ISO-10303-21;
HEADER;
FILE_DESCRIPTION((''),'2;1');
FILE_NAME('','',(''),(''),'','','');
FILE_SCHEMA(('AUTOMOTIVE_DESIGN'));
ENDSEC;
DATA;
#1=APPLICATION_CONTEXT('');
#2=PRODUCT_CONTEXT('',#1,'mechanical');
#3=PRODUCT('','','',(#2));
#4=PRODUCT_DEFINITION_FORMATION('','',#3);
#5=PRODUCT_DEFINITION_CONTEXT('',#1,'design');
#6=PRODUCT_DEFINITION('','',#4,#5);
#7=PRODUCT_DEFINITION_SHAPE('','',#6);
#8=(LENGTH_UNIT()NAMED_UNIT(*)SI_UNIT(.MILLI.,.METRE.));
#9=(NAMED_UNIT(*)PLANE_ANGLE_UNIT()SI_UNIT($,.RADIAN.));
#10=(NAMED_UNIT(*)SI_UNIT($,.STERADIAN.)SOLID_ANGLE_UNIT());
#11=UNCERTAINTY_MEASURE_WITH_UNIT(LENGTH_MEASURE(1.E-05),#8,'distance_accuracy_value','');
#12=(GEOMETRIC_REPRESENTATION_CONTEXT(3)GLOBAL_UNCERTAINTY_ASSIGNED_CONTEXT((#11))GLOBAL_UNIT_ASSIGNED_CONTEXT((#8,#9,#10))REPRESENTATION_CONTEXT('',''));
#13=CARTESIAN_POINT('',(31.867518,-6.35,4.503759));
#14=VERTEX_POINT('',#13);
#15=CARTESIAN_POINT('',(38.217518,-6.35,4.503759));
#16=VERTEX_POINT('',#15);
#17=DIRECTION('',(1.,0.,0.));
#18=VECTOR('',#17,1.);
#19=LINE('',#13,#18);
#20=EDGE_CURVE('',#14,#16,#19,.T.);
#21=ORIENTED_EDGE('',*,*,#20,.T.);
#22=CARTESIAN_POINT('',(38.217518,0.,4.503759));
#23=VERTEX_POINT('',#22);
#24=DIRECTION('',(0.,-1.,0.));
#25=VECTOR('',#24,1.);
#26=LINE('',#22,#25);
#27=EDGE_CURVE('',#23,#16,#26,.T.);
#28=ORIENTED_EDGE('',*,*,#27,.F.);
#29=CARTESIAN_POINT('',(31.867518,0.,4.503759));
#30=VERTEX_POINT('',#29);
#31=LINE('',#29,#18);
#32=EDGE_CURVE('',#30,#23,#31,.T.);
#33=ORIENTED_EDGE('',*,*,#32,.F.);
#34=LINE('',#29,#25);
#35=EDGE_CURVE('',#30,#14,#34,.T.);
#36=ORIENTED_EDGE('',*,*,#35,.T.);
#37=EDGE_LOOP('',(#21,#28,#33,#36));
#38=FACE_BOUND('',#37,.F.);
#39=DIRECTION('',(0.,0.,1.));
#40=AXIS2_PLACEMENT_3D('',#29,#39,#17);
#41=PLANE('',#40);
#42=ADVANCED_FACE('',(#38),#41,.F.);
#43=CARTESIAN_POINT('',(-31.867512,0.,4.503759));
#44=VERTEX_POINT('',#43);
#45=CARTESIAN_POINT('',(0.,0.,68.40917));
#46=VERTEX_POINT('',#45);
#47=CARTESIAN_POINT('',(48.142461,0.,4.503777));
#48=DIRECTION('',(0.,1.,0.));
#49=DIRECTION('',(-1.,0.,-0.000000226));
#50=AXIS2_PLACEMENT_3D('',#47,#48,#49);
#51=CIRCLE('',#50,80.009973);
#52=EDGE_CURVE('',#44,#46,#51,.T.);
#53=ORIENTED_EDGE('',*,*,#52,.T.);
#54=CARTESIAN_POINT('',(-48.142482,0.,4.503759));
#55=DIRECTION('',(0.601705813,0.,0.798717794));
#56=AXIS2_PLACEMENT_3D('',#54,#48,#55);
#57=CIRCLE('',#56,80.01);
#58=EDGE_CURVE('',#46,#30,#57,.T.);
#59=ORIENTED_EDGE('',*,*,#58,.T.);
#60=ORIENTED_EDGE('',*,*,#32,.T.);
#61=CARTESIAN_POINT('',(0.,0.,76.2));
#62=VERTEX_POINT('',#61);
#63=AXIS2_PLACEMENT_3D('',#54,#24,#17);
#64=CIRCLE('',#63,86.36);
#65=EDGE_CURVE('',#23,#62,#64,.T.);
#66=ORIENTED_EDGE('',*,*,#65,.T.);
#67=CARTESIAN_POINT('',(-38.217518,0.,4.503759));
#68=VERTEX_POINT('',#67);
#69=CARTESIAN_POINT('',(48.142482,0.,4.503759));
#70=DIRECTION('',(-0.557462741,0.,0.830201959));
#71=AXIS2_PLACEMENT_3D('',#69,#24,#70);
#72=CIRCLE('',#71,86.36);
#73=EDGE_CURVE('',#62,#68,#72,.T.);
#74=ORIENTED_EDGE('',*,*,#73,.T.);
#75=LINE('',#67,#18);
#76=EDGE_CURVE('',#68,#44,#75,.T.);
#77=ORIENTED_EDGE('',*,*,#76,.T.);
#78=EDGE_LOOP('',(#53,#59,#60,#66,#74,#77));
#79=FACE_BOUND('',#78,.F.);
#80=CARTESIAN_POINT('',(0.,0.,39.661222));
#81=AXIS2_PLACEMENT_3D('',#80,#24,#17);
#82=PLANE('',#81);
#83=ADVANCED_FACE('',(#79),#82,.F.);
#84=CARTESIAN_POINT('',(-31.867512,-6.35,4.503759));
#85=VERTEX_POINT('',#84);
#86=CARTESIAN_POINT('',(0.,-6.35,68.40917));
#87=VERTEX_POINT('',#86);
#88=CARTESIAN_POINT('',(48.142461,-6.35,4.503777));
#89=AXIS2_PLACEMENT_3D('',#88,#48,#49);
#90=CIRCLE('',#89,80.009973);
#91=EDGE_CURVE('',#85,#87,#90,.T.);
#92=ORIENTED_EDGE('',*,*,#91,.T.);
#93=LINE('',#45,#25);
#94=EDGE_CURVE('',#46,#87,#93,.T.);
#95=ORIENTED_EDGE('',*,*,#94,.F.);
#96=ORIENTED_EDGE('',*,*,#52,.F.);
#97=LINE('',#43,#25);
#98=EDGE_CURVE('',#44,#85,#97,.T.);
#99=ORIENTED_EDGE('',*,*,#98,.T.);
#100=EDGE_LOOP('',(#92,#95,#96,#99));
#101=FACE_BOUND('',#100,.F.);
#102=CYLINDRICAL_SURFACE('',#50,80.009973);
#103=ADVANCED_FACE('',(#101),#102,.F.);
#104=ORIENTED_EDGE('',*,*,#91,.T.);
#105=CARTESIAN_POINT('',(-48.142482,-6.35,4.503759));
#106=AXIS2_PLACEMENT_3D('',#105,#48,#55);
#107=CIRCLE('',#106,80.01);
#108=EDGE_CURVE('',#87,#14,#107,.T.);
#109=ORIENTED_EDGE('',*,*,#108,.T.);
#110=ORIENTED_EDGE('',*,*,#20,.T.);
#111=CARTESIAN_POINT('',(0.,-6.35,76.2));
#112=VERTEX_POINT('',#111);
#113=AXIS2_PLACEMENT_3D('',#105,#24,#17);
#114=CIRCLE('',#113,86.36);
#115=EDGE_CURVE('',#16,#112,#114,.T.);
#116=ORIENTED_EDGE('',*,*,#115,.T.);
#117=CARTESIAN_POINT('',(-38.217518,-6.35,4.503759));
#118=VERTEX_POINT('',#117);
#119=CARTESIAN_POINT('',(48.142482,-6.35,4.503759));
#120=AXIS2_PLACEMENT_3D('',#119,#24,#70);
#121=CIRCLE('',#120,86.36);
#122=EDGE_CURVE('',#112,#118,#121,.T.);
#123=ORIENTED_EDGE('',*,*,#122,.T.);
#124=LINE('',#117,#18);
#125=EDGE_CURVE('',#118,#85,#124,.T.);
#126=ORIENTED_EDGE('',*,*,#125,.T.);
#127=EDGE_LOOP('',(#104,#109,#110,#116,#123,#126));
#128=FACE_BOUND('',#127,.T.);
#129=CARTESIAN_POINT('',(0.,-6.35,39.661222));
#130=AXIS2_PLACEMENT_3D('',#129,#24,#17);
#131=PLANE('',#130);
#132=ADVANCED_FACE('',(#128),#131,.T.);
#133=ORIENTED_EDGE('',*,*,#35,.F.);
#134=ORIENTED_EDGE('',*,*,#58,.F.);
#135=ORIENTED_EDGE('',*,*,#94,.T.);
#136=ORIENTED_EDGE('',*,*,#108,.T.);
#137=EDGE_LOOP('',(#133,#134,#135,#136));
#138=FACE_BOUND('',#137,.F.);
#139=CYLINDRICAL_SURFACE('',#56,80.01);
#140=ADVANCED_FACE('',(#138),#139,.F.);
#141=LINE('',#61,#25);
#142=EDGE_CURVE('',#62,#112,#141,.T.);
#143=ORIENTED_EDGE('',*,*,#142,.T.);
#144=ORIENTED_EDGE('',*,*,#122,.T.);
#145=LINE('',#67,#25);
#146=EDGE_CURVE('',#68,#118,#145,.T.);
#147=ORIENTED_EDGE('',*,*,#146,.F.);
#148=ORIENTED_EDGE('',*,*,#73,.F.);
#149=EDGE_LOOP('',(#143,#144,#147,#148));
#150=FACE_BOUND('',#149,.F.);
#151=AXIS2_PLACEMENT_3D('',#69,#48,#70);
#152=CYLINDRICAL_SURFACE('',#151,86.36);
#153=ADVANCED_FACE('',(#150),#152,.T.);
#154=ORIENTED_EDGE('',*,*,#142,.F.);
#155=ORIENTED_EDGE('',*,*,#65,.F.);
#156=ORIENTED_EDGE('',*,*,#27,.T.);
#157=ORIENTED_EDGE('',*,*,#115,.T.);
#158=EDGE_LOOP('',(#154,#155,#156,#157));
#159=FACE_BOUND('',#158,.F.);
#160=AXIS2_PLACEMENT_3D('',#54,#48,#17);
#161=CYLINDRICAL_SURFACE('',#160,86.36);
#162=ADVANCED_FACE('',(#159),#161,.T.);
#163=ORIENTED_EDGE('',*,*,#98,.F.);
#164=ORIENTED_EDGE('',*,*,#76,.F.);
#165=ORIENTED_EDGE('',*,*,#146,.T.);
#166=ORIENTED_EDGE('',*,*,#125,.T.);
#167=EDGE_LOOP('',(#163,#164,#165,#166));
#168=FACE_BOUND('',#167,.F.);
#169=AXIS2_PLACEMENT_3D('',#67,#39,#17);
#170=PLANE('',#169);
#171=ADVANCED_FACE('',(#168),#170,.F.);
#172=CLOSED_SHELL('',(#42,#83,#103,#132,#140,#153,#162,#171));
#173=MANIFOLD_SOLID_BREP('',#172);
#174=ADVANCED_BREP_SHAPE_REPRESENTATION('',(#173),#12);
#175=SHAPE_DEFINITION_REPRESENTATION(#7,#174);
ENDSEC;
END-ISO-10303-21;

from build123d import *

# Parameters (mm, degrees)
F1_DEPTH = 6.35


# Not quite as in the source:
# - ends of sketch curves that miss each other by under 0.0002 mm in the source are joined


with BuildPart() as f1:
    # F0 (on Front) → F1 (new body)
    with BuildSketch(Plane.XZ):
        with BuildLine():
            ThreePointArc((38.2175176824, 4.5037588412), (28.0665538033, 45.1268115764), (0, 76.2))
            ThreePointArc((0, 76.2), (-28.0665538033, 45.1268115764), (-38.2175176824, 4.5037588412))
            Line((-38.2175176824, 4.5037588412), (-31.8675123234, 4.5037588412))
            ThreePointArc((-31.8675123234, 4.5037588412), (-23.4587753486, 40.2089414997), (0, 68.4091699138))
            ThreePointArc((0, 68.4091699138), (23.4587753486, 40.2089414997), (31.8675181077, 4.5037588412))
            Line((31.8675181077, 4.5037588412), (38.2175176824, 4.5037588412))
        make_face()
    extrude(amount=F1_DEPTH)


solid = f1.part
